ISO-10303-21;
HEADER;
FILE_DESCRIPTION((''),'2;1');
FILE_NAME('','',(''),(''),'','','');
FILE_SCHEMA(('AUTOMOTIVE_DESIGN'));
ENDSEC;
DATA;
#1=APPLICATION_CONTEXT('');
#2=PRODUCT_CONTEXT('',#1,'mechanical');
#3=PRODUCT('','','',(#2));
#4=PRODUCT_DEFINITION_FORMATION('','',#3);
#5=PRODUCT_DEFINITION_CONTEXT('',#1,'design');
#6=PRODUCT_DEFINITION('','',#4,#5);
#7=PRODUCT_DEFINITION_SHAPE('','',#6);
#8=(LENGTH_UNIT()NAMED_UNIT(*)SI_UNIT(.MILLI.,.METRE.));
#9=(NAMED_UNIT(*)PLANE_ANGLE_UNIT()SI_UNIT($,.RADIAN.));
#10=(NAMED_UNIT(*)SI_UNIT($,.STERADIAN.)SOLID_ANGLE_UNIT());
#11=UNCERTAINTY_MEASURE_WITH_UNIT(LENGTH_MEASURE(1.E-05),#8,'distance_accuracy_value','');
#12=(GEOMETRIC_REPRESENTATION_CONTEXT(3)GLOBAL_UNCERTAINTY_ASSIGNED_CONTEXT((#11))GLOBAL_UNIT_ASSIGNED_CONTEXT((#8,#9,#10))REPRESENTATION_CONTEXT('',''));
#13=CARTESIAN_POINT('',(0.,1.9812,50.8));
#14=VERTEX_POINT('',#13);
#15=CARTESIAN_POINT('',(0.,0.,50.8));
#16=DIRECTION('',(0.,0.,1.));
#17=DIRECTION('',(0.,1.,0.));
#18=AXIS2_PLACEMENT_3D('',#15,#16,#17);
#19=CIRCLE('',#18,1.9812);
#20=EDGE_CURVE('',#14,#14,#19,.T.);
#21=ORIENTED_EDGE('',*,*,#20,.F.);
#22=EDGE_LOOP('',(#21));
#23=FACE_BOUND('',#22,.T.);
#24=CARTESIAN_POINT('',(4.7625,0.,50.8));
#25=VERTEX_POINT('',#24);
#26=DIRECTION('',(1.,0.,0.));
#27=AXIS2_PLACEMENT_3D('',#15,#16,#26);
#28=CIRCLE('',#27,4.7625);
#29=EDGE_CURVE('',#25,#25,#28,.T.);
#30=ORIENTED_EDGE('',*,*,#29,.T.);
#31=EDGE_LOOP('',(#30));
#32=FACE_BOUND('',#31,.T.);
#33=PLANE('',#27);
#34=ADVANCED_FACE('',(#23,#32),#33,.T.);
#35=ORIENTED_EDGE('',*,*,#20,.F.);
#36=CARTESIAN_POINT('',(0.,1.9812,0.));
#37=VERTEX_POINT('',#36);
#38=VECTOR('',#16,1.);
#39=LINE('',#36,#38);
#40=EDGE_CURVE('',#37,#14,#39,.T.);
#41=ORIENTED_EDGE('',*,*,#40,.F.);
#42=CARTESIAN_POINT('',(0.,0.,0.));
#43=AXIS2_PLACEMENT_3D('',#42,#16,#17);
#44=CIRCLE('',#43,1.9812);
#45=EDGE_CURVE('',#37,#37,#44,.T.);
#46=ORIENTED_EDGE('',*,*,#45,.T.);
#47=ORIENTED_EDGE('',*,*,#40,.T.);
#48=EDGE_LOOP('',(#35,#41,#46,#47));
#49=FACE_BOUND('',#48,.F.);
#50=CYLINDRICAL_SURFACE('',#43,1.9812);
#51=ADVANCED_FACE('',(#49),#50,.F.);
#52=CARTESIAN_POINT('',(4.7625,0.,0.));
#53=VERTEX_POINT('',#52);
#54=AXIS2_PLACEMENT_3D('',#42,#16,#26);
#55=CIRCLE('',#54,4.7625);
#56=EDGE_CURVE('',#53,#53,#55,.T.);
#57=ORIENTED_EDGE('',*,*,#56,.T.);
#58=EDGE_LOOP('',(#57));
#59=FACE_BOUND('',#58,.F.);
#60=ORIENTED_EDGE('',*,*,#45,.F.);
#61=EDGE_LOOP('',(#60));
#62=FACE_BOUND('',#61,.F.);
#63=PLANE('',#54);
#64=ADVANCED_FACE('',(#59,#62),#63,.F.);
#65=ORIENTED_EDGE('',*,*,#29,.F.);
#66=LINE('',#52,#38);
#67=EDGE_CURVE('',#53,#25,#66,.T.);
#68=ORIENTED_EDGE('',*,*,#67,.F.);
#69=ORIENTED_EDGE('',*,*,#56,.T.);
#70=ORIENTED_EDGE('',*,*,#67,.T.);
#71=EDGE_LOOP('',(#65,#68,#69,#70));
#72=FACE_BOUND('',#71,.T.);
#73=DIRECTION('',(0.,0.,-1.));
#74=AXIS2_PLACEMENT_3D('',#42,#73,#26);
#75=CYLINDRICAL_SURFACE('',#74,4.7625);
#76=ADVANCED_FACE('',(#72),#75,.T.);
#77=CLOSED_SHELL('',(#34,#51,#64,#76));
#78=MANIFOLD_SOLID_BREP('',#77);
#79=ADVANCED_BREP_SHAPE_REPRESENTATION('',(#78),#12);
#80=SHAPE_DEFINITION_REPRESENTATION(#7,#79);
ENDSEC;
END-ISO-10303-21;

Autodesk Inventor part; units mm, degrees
ref_plane "YZ Plane" through (0, 0, 0) normal (1, 0, 0) x (0, 1, 0)
ref_plane "XZ Plane" through (0, 0, 0) normal (0, 1, 0) x (-1, 0, 0)
ref_plane "XY Plane" through (0, 0, 0) normal (0, 0, 1) x (1, 0, 0)
sketch "Sketch1" plane through (0, 0, 0) normal (0, 0, 1) x (1, 0, 0)
  circle A0 centre (0, 0) radius 4.7625
  dimension "d10" = 9.525
extrude "Extrusion1" add sketch "Sketch1" along normal blind 50.8
hole "Hole1" at (0, 0, 0) direction (0, 0, 1) diameter 3.9624 end through all thread size "10-32 UNF" class "2B" standard "ANSI Unified Screw Threads"
equation "\"d10\" = OutsideDiameter"
equation "\"d1\" = StandoffLength"
equation "\"StandoffLength\" = 50.8"
equation "\"HoleDiameter\" = 5.1054"
equation "\"OutsideDiameter\" = 9.525"
properties part number "GP10-013" material "Aluminum 6061"
